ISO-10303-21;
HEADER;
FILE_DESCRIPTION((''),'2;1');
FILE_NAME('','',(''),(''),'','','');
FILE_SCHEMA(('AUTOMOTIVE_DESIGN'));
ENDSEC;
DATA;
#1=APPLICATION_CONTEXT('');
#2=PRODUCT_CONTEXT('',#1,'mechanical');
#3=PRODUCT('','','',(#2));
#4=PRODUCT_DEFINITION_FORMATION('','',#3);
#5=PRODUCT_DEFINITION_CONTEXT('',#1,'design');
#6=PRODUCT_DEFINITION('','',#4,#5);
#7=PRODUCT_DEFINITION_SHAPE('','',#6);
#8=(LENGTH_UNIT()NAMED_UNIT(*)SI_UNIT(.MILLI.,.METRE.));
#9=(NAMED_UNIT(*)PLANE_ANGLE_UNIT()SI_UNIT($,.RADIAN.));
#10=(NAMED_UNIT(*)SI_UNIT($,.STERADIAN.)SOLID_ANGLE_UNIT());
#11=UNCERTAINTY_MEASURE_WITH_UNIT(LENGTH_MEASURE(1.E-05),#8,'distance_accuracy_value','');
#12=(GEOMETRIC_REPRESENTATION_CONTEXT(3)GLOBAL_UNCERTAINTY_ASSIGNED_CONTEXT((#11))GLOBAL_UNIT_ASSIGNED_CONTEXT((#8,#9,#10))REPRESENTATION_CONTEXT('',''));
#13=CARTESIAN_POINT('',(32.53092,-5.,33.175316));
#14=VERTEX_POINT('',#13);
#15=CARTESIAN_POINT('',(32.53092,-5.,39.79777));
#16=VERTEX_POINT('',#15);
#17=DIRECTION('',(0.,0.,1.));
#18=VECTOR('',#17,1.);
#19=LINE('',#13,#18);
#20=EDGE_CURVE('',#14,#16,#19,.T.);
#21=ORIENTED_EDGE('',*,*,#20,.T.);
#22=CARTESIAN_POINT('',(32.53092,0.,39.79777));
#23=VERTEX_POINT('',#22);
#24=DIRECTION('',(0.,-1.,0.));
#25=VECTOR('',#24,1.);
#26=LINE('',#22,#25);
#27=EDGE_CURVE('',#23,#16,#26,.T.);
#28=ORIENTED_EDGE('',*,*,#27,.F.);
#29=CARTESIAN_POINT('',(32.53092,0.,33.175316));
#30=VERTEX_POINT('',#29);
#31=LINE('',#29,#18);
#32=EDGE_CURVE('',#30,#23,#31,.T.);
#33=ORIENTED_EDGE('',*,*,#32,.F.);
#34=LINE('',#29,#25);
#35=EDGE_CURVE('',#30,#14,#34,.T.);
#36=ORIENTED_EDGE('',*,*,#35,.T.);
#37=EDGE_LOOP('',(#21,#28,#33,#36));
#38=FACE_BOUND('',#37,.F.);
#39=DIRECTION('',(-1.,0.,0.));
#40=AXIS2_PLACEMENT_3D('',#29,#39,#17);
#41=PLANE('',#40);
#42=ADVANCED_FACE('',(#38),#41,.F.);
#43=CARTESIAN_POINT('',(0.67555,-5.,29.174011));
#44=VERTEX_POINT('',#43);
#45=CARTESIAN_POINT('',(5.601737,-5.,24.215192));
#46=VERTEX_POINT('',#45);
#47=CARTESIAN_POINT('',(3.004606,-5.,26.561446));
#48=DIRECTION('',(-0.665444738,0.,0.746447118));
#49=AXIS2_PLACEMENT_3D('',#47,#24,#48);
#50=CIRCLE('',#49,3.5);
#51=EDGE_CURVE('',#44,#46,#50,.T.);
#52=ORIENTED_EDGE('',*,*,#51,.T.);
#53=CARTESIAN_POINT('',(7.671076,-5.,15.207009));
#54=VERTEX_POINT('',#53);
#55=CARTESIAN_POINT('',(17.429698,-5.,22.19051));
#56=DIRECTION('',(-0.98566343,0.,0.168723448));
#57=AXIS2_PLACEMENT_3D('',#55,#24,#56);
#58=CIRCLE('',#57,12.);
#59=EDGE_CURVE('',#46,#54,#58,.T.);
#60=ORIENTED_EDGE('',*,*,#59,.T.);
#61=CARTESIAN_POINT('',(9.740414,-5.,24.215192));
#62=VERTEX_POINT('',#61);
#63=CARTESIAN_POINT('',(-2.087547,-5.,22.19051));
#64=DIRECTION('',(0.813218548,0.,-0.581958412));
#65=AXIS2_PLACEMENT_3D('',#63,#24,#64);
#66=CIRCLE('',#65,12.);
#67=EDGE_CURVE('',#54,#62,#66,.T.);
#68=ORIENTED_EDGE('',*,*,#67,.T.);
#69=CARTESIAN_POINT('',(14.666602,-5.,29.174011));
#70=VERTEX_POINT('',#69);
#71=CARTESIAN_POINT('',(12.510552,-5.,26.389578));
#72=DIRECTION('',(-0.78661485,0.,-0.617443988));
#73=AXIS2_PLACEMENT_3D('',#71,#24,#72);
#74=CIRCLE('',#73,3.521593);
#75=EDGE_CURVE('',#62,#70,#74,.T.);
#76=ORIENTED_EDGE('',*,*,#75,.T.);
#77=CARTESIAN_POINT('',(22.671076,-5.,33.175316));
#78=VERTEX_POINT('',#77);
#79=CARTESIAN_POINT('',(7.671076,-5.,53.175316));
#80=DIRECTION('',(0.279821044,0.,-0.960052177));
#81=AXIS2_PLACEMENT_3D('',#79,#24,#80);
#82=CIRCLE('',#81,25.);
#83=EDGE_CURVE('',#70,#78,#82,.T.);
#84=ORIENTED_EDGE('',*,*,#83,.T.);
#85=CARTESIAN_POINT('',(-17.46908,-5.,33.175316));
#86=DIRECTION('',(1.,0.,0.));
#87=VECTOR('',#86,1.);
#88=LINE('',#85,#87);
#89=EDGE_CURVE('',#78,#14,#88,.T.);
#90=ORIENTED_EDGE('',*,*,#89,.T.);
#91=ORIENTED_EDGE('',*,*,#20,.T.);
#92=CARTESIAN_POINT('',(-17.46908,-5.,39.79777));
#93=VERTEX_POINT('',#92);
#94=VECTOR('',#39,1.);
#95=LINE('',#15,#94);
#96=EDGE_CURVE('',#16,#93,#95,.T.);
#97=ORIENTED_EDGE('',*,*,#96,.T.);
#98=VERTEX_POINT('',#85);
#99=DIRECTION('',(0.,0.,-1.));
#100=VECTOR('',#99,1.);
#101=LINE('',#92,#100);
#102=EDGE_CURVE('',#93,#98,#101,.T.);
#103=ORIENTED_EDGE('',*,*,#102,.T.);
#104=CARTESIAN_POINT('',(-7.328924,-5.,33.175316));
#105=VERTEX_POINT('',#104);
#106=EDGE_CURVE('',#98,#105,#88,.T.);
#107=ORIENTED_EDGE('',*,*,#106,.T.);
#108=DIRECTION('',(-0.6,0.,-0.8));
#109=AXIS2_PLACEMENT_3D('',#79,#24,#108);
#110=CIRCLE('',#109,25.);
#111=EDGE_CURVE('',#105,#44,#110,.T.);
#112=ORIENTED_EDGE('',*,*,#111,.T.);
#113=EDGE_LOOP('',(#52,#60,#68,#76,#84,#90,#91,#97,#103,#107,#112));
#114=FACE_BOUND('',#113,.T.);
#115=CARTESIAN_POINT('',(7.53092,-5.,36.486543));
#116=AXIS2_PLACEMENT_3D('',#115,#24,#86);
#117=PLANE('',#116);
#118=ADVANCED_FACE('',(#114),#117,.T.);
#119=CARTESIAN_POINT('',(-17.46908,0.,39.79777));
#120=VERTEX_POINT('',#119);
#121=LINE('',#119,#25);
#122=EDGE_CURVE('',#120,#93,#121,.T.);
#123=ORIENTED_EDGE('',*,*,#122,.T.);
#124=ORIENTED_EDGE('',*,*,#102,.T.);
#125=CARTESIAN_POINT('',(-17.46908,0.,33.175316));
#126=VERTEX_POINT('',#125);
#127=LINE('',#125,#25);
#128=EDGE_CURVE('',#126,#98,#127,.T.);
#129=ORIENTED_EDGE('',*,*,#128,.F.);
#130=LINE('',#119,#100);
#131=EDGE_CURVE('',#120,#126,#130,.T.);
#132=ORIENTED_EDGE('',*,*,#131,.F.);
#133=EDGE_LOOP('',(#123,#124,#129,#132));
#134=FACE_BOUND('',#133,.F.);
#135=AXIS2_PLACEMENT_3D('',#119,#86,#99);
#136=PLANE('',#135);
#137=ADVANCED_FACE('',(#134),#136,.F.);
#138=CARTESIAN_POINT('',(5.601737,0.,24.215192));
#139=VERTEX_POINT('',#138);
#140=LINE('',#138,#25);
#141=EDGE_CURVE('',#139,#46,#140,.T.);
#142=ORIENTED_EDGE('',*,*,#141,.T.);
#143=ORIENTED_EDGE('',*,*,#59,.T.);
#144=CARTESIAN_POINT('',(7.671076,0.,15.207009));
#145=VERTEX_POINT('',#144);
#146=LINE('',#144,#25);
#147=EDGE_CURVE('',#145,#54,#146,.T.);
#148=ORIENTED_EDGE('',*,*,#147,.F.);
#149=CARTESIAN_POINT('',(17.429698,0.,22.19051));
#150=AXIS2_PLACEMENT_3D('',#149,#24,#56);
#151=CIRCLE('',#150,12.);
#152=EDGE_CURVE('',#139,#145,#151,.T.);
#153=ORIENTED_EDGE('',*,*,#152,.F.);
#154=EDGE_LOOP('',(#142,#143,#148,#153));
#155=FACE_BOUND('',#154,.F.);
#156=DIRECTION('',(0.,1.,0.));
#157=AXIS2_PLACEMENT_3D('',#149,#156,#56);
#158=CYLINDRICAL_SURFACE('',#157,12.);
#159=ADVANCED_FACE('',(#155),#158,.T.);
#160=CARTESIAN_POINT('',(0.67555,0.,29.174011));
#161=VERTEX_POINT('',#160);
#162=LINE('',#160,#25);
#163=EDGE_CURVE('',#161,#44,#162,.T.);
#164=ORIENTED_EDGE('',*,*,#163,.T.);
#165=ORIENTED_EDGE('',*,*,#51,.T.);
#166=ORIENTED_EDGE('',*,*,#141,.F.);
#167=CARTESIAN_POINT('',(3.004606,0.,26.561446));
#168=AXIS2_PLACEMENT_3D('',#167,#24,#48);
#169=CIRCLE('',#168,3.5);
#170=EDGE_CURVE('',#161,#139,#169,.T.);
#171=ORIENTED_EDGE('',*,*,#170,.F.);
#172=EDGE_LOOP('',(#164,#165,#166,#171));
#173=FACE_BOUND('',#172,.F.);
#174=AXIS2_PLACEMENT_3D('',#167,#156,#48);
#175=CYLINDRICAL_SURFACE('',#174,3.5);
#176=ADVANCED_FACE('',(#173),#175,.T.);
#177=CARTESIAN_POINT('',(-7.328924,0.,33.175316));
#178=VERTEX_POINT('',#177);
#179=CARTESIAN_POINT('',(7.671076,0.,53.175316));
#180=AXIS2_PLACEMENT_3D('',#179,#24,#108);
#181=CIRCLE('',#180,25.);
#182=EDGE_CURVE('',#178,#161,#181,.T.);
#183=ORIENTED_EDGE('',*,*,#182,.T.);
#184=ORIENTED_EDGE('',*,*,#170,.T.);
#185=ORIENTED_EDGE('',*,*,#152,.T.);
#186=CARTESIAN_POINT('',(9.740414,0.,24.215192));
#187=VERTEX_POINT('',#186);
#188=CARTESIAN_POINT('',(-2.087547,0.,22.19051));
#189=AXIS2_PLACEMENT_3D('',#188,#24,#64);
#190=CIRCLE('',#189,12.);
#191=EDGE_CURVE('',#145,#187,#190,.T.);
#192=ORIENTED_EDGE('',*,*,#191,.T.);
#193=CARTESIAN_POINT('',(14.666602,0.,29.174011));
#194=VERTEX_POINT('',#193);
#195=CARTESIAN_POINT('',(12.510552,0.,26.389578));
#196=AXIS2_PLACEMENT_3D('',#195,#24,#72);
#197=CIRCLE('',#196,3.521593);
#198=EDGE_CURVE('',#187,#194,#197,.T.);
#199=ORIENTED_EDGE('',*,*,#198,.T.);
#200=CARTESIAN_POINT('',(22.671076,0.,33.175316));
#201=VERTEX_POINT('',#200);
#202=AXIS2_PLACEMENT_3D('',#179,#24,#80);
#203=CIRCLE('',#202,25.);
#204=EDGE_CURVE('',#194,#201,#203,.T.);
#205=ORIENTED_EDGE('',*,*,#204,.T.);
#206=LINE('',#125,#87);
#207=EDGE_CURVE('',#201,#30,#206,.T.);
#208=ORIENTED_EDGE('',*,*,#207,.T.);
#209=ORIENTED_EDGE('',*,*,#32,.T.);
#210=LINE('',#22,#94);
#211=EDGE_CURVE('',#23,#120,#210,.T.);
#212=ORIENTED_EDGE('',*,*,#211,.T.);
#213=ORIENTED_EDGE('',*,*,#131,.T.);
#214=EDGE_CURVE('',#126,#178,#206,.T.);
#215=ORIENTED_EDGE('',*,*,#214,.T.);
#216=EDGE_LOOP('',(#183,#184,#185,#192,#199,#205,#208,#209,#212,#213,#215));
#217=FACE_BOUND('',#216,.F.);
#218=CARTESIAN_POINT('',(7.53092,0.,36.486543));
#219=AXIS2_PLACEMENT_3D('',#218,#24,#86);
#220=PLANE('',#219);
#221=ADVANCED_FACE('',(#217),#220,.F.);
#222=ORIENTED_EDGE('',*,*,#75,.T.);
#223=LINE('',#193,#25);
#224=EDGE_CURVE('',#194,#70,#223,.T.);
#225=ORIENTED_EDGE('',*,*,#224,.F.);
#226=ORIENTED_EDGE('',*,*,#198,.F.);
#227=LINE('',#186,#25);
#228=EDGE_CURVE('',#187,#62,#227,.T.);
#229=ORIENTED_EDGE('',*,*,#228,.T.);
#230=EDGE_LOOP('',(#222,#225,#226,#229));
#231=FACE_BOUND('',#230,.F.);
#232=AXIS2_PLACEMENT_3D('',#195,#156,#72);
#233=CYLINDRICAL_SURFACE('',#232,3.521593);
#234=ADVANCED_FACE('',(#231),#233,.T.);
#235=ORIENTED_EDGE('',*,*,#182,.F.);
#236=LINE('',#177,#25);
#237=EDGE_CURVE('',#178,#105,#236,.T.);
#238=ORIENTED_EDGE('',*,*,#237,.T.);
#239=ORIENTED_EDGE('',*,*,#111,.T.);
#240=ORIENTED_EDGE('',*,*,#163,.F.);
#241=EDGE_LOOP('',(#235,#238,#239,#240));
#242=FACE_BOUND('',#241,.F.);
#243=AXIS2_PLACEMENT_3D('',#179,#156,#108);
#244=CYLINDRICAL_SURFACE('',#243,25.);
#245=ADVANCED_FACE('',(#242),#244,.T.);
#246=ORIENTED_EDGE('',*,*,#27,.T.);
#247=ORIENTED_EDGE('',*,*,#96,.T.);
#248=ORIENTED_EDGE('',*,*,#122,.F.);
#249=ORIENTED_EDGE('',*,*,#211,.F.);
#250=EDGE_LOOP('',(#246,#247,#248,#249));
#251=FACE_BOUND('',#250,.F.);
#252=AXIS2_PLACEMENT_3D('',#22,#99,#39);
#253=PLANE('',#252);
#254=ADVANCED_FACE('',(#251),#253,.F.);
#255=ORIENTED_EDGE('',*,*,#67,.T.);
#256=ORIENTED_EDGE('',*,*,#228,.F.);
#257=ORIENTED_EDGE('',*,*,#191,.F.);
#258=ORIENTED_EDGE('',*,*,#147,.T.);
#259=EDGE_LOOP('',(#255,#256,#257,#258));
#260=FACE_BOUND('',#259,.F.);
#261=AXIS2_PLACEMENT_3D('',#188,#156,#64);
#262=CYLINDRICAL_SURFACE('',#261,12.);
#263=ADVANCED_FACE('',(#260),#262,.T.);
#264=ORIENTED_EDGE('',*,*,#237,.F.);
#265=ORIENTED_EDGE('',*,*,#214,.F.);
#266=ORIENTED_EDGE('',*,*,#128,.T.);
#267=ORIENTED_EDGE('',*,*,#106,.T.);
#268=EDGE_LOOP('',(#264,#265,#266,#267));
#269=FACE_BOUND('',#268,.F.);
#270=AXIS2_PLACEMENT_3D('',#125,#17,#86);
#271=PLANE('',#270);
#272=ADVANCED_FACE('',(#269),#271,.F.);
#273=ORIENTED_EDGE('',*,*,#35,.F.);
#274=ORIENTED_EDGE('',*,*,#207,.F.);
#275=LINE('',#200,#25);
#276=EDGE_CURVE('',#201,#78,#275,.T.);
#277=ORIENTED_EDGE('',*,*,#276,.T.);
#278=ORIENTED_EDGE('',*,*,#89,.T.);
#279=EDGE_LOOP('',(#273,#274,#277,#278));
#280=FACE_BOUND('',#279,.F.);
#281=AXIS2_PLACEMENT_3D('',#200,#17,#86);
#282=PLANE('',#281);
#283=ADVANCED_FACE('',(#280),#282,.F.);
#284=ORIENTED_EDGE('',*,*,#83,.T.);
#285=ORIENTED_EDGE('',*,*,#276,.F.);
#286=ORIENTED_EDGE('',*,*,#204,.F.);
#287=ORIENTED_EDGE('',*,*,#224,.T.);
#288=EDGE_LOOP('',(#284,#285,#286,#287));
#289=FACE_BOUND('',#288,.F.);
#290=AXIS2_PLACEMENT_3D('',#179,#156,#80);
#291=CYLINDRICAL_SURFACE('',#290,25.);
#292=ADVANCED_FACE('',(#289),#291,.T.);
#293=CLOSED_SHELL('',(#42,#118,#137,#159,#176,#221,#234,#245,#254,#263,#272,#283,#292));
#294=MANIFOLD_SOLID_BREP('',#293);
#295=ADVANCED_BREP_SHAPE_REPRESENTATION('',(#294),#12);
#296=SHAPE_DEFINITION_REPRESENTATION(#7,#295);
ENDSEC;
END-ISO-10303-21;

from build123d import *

# Parameters (mm, degrees)
F1_DEPTH = 5


# Not quite as in the source:
# - a feature of the source that left no trace in its solid (it failed there, or was rolled back) is left out


with BuildPart() as f1:
    # F0 (on Front) → F1 (new body)
    with BuildSketch(Plane.XZ):
        Polygon((32.530919835, 39.797769749), (-17.469080165, 39.797769749), (-17.469080165, 33.1753157079), (-7.3289242573, 33.1753157079), (22.6710757427, 33.1753157079), (32.530919835, 33.1753157079), align=None)
        with BuildLine():
            Line((22.6710757427, 33.1753157079), (-7.3289242573, 33.1753157079))
            ThreePointArc((-7.3289242573, 33.1753157079), (-3.5071800034, 30.8135939836), (0.6755496306, 29.1740112764))
            Line((0.6755496306, 29.1740112764), (7.6710757427, 29.1740112764))
            Line((7.6710757427, 29.1740112764), (14.6666018548, 29.1740112764))
            ThreePointArc((14.6666018548, 29.1740112764), (18.8493314888, 30.8135939836), (22.6710757427, 33.1753157079))
        make_face()
        with BuildLine():
            Line((7.6710757427, 29.1740112764), (0.6755496306, 29.1740112764))
            ThreePointArc((0.6755496306, 29.1740112764), (0.5215760436, 24.0947560366), (5.6017371537, 24.215191712))
            ThreePointArc((5.6017371537, 24.215191712), (6.355285365, 26.8119146366), (7.6710757427, 29.1740112764))
        make_face()
        with BuildLine():
            ThreePointArc((9.7404143316, 24.215191712), (15.0089010531, 23.907669722), (14.6666018548, 29.1740112764))
            Line((14.6666018548, 29.1740112764), (7.6710757427, 29.1740112764))
            ThreePointArc((7.6710757427, 29.1740112764), (8.9868661204, 26.8119146366), (9.7404143316, 24.215191712))
        make_face()
        with BuildLine():
            ThreePointArc((9.7404143316, 24.215191712), (8.9868661204, 26.8119146366), (7.6710757427, 29.1740112764))
            ThreePointArc((7.6710757427, 29.1740112764), (6.355285365, 26.8119146366), (5.6017371537, 24.215191712))
            ThreePointArc((5.6017371537, 24.215191712), (5.7343151874, 19.5038742549), (7.6710757427, 15.20700939))
            ThreePointArc((7.6710757427, 15.20700939), (9.607836298, 19.5038742549), (9.7404143316, 24.215191712))
        make_face()
    extrude(amount=F1_DEPTH)


solid = f1.part
